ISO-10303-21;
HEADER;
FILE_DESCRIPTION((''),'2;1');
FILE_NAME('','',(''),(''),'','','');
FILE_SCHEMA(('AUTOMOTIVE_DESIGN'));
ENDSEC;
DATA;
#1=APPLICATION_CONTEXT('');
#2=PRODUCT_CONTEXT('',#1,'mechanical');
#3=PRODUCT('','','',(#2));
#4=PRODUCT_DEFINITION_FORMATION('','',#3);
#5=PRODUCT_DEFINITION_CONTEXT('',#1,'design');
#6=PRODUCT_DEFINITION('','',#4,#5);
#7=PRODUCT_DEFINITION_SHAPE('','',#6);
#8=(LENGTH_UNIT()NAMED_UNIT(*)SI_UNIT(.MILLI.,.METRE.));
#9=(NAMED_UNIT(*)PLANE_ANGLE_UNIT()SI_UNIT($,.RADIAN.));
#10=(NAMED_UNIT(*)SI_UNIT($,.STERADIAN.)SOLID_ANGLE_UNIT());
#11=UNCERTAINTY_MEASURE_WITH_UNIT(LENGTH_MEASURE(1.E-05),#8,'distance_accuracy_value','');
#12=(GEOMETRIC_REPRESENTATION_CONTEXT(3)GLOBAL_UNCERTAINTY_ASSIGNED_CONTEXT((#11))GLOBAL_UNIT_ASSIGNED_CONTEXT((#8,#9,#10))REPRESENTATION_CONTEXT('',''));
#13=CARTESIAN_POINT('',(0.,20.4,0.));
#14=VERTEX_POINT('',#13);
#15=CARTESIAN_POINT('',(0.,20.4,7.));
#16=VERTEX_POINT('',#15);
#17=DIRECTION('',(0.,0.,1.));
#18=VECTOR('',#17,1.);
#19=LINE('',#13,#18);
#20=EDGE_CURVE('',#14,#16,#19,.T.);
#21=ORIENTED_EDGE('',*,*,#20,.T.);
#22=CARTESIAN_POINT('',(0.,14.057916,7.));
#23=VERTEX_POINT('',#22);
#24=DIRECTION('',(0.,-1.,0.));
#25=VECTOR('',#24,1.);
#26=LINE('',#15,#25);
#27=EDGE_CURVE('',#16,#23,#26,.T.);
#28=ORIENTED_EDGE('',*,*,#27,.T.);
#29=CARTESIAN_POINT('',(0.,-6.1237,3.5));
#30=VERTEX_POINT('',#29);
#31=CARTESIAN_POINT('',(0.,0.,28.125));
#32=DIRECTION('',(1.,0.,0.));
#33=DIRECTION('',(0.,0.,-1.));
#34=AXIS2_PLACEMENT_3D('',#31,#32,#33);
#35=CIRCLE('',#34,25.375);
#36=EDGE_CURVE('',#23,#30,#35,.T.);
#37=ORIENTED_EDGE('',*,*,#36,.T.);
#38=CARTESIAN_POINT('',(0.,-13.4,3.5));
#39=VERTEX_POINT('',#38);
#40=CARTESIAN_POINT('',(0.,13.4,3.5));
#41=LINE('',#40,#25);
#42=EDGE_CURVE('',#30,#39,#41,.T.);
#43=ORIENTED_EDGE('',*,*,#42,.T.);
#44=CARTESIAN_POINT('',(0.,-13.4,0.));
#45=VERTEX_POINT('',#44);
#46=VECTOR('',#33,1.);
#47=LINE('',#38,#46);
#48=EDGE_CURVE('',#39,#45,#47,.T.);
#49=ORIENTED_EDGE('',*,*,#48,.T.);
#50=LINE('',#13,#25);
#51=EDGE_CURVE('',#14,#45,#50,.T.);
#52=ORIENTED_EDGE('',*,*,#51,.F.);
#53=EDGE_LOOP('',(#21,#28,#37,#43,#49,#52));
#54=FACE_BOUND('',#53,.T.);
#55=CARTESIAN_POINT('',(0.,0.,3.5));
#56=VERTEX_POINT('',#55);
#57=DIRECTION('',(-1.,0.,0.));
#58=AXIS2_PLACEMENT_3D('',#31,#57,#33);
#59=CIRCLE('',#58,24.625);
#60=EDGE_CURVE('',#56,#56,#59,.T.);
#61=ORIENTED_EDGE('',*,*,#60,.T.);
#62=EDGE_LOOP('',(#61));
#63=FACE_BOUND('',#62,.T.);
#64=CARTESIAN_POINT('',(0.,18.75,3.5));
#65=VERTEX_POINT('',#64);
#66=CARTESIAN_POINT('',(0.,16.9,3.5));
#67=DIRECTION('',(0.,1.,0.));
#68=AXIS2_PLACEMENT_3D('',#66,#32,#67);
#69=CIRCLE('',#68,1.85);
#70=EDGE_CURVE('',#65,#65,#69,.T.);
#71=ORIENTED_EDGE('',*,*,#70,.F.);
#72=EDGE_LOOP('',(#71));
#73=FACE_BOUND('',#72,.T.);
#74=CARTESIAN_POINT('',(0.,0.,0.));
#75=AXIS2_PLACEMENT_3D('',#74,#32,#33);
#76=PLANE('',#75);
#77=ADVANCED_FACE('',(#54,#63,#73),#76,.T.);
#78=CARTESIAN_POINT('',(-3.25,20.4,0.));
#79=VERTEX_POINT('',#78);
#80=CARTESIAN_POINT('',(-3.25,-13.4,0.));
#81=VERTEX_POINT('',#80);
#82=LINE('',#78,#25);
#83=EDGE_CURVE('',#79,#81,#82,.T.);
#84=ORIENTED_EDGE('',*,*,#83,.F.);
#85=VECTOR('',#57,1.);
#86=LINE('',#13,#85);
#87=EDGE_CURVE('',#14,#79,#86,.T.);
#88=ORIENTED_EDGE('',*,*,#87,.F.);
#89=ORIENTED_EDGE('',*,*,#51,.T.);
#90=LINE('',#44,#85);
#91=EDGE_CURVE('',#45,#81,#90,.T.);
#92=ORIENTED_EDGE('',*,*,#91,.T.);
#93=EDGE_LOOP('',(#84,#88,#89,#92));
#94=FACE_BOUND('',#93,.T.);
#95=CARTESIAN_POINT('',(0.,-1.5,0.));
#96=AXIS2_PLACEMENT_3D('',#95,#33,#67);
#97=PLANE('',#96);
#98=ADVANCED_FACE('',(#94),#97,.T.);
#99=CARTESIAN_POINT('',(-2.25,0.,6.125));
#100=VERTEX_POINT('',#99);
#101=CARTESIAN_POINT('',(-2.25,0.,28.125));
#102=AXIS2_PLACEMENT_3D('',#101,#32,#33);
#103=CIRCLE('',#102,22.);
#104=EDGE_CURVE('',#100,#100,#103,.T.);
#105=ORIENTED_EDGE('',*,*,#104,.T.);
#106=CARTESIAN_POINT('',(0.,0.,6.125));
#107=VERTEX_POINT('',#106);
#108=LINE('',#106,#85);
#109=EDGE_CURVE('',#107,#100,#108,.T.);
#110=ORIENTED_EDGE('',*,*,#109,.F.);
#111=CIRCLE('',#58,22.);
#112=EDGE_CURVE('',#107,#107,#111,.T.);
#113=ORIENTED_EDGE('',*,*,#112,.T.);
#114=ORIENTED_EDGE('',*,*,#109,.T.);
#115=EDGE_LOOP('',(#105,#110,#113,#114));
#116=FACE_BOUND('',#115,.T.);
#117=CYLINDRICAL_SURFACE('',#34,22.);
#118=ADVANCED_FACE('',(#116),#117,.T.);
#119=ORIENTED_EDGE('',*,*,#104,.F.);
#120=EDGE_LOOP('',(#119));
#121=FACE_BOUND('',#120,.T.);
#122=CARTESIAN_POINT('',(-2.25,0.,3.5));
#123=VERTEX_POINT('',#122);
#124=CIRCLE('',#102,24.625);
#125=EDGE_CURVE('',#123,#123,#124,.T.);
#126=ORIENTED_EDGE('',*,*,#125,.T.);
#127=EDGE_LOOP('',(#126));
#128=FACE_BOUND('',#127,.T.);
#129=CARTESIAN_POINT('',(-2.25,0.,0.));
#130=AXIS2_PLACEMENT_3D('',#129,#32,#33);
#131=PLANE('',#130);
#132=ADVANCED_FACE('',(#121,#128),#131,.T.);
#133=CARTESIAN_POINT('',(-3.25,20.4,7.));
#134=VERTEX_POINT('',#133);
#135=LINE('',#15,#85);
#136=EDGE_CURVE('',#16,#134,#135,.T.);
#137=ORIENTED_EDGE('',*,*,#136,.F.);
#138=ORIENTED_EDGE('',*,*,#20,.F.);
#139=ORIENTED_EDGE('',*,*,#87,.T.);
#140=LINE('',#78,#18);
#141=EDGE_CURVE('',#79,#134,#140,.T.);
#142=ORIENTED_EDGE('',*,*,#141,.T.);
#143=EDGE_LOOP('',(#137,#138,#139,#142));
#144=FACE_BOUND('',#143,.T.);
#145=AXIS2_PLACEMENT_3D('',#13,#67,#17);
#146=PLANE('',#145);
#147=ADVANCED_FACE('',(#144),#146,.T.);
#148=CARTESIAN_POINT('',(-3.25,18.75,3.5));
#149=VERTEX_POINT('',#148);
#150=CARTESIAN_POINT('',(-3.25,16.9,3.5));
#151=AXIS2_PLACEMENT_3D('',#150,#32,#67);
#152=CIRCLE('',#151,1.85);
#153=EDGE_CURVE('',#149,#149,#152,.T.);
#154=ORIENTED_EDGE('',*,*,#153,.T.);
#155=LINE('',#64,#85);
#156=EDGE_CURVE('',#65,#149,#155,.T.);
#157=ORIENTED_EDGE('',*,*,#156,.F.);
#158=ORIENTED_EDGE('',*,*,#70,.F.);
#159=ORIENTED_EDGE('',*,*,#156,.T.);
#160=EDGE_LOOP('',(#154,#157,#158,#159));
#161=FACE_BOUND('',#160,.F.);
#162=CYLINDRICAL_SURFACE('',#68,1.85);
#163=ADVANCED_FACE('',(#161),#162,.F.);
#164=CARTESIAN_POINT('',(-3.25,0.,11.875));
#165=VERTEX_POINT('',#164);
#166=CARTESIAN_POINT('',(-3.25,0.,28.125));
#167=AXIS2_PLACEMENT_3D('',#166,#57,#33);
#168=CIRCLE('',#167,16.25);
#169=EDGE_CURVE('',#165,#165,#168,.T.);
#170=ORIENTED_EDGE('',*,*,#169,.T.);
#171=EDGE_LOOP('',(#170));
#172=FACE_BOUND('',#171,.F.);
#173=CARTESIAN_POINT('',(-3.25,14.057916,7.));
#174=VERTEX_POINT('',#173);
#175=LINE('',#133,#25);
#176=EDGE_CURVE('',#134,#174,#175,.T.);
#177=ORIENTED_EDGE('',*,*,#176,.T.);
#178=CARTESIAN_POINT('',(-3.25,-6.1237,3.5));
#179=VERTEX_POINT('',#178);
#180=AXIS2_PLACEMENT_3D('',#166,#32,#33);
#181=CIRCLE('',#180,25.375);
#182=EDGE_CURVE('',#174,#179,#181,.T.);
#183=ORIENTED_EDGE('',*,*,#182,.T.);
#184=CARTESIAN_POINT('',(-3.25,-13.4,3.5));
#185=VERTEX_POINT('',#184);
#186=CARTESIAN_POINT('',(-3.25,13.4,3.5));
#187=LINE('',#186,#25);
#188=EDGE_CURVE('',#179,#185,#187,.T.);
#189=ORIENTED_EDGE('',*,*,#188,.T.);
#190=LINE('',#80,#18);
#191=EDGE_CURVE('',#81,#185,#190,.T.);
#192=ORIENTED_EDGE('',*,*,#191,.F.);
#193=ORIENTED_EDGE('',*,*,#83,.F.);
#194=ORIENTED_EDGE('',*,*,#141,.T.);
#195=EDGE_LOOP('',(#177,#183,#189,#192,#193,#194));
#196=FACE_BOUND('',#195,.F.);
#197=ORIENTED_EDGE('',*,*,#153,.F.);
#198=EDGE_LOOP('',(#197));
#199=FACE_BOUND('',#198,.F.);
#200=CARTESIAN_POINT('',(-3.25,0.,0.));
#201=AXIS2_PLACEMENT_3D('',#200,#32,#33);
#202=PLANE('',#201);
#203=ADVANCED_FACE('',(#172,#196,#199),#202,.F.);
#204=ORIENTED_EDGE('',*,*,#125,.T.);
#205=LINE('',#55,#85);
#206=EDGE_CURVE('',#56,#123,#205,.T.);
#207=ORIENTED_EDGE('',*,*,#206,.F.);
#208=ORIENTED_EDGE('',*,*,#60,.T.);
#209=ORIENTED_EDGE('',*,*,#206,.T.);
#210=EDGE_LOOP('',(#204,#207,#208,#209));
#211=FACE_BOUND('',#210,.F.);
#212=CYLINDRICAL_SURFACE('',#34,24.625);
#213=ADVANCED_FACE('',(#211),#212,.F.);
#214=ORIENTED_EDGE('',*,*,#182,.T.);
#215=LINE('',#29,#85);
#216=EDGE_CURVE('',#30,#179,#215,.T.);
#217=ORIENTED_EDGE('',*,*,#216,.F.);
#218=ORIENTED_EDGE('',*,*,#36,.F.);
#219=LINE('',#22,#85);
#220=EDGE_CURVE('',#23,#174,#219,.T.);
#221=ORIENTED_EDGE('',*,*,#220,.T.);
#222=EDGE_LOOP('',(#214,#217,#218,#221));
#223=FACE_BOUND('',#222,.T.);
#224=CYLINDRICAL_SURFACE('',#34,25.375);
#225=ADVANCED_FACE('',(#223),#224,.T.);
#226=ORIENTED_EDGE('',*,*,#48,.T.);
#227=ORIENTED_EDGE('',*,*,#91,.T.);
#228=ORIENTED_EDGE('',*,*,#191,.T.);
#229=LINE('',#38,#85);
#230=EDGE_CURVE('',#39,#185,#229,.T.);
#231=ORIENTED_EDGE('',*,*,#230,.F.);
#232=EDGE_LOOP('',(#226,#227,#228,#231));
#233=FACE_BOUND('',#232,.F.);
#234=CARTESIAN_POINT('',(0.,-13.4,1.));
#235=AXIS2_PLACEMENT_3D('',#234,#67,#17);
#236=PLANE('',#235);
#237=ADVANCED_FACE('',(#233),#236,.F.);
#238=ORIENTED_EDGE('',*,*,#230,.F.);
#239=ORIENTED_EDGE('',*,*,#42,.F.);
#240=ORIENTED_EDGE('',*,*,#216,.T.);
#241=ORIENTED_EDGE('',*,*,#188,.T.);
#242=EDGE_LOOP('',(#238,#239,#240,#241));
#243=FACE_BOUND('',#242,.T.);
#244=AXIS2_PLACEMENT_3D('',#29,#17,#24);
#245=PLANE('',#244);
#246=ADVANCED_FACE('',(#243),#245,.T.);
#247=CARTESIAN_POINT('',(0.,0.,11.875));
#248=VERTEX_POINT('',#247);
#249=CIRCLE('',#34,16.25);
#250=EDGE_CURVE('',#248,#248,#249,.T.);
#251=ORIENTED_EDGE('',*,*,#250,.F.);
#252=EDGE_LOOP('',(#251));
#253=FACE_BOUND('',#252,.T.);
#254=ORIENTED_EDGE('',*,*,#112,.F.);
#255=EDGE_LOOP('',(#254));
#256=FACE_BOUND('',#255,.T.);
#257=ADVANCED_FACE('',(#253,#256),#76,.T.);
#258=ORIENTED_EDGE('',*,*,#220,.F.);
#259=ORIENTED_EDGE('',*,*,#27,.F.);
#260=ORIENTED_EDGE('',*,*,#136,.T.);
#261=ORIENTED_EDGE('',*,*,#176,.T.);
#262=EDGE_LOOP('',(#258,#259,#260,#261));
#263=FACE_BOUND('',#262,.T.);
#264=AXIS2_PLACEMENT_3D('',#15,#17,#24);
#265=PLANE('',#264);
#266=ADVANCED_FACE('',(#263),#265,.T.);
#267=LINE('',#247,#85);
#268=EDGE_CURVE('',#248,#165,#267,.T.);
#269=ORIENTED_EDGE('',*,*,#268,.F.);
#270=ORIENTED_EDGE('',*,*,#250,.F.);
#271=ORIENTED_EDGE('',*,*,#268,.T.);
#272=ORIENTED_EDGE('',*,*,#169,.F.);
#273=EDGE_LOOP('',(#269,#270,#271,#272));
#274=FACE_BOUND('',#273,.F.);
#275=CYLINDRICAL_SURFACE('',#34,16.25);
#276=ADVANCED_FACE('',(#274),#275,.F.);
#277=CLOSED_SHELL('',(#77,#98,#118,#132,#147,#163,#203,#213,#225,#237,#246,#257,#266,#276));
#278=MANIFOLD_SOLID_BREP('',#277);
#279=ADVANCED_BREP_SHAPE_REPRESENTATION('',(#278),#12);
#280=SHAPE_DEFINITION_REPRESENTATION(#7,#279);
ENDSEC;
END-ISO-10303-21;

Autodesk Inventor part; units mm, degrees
ref_plane "YZ Plane" through (0, 0, 0) normal (1, 0, 0) x (0, 1, 0)
ref_plane "XZ Plane" through (0, 0, 0) normal (0, 1, 0) x (-1, 0, 0)
ref_plane "XY Plane" through (0, 0, 0) normal (0, 0, 1) x (1, 0, 0)
sketch "Sketch2: RFID holder" plane through (0, 0, 0) normal (1, 0, 0) x (0, 0, -1)
  circle A0 centre (-28.125, 0) radius 16.25
  circle A1 centre (-28.125, 0) radius 22
  circle A2 centre (-28.125, 0) radius 24.625
  circle A3 centre (-28.125, 0) radius 25.375
  line L0 (-28.125, 1.5) -> (0, 1.5)
  line L1 (-28.125, -1.5) -> (0, -1.5)
  line L2 (0, -13.4) -> (0, 13.4)
  line L3 (0, -13.4) -> (-3.5, -13.4)
  line L4 (0, 13.4) -> (-3.5, 13.4)
  line L5 (-3.5, 13.4) -> (-3.5, -13.4)
  line L6 (-28.125, 1.5) -> (-28.125, -1.5) construction
  line L7 (-2.75, 13.4) -> (-2.75, -13.4) construction
  line L8 (-1, 13.4) -> (-1, -13.4)
  line L9 (-3.5, -6.1237) -> (0, -6.1237)
  point P0 (-2.7944, -1.5)
  point P1 (-2.7944, 1.5)
  point P2 (0, 0)
  point P3 (-6.1762, -1.5)
  point P4 (-6.1762, 1.5)
  point P5 (-3.5457, -1.5)
  point P6 (-3.5457, 1.5)
  point P7 (-3.5, -1.5)
  point P8 (-3.5, 1.5)
  point P9 (-3.5, 0)
  point P10 (0, 0)
  point P11 (-3.5, 6.1237)
  point P12 (-3.5, -6.1237)
  point P13 (-1, -1.5)
  point P14 (-1, 1.5)
  dimension "d48" = 50.75
  dimension "RFID_coil_ID" = 44
  dimension "RFID_coil_OD" = 49.25
  dimension "d7" = 0.75
  dimension "d49" = 3
  dimension "d54" = 1.5
  dimension "d57" = 0.75
  dimension "d58" = 26.8
  dimension "d59" = 3.5
  dimension "d60" = 32.5
  dimension "dist_for_RFID_wire" = 2.5
sketch "Sketch8: M3 through hole" plane through (0, 0, 0) normal (1, 0, 0) x (0, 1, 0)
  line L0 (20.4, 7) -> (13.4, 7)
  line L1 (13.4, 7) -> (13.4, 0)
  line L2 (13.4, 0) -> (20.4, 0)
  line L3 (20.4, 0) -> (20.4, 7)
  circle A0 centre (16.9, 3.5) radius 1.85
  circle A1 centre (0, 28.125) radius 25.375 projected
  line L4 (13.4, 3.5) -> (-13.4, 3.5) projected
  line L5 (13.4, 0) -> (13.4, 3.5) construction
  point P0 (0, 0)
  point P1 (20.4, 3.5)
  point P2 (16.9, 7)
  point P3 (6.1237, 3.5)
  point P4 (14.0579, 7)
  dimension "d63" = 3.7
  dimension "d66" = 7
  dimension "d67" = 7
extrude "Ex2: RFID holder base" add sketch "Sketch2: RFID holder" against normal blind 3.25 contours A0 L0 A1 L1 | A0 L1 A1 L0 | L0 A2 L1 A1 | A1 L1 A2 L0 | L0 L5 A2 | A2 L1 L5 A3 L0 | A2 L5 L1 | L5 L0 A3 L1 | L5 A3 L0 | L1 A3 L5 | L0 L8 L1 A3 | A3 L5 L4 L8 L0 | L1 L8 L9 A3 | L9 L8 L3 L5 | L8 L4 L2 L0 | L0 L2 L1 L8 | L1 L2 L9 L8 | L9 L2 L3 L8
extrude "Ex3: RFID inset" cut sketch "Sketch2: RFID holder" against normal blind 2.25 contours L0 A2 L1 A1 | A1 L1 A2 L0
extrude "Ex4: RFID wire cutout" [suppressed]
extrude "Ex: M3 through hole" add sketch "Sketch8: M3 through hole" against normal up to surface (3.25 mm away) contours L3 L2 L1 A1 L0 | L1 L4 A1
equation "\"d54\" = 0.5 * d49"
properties part number "RFID_holder_coil_01" material "PLA Black"
